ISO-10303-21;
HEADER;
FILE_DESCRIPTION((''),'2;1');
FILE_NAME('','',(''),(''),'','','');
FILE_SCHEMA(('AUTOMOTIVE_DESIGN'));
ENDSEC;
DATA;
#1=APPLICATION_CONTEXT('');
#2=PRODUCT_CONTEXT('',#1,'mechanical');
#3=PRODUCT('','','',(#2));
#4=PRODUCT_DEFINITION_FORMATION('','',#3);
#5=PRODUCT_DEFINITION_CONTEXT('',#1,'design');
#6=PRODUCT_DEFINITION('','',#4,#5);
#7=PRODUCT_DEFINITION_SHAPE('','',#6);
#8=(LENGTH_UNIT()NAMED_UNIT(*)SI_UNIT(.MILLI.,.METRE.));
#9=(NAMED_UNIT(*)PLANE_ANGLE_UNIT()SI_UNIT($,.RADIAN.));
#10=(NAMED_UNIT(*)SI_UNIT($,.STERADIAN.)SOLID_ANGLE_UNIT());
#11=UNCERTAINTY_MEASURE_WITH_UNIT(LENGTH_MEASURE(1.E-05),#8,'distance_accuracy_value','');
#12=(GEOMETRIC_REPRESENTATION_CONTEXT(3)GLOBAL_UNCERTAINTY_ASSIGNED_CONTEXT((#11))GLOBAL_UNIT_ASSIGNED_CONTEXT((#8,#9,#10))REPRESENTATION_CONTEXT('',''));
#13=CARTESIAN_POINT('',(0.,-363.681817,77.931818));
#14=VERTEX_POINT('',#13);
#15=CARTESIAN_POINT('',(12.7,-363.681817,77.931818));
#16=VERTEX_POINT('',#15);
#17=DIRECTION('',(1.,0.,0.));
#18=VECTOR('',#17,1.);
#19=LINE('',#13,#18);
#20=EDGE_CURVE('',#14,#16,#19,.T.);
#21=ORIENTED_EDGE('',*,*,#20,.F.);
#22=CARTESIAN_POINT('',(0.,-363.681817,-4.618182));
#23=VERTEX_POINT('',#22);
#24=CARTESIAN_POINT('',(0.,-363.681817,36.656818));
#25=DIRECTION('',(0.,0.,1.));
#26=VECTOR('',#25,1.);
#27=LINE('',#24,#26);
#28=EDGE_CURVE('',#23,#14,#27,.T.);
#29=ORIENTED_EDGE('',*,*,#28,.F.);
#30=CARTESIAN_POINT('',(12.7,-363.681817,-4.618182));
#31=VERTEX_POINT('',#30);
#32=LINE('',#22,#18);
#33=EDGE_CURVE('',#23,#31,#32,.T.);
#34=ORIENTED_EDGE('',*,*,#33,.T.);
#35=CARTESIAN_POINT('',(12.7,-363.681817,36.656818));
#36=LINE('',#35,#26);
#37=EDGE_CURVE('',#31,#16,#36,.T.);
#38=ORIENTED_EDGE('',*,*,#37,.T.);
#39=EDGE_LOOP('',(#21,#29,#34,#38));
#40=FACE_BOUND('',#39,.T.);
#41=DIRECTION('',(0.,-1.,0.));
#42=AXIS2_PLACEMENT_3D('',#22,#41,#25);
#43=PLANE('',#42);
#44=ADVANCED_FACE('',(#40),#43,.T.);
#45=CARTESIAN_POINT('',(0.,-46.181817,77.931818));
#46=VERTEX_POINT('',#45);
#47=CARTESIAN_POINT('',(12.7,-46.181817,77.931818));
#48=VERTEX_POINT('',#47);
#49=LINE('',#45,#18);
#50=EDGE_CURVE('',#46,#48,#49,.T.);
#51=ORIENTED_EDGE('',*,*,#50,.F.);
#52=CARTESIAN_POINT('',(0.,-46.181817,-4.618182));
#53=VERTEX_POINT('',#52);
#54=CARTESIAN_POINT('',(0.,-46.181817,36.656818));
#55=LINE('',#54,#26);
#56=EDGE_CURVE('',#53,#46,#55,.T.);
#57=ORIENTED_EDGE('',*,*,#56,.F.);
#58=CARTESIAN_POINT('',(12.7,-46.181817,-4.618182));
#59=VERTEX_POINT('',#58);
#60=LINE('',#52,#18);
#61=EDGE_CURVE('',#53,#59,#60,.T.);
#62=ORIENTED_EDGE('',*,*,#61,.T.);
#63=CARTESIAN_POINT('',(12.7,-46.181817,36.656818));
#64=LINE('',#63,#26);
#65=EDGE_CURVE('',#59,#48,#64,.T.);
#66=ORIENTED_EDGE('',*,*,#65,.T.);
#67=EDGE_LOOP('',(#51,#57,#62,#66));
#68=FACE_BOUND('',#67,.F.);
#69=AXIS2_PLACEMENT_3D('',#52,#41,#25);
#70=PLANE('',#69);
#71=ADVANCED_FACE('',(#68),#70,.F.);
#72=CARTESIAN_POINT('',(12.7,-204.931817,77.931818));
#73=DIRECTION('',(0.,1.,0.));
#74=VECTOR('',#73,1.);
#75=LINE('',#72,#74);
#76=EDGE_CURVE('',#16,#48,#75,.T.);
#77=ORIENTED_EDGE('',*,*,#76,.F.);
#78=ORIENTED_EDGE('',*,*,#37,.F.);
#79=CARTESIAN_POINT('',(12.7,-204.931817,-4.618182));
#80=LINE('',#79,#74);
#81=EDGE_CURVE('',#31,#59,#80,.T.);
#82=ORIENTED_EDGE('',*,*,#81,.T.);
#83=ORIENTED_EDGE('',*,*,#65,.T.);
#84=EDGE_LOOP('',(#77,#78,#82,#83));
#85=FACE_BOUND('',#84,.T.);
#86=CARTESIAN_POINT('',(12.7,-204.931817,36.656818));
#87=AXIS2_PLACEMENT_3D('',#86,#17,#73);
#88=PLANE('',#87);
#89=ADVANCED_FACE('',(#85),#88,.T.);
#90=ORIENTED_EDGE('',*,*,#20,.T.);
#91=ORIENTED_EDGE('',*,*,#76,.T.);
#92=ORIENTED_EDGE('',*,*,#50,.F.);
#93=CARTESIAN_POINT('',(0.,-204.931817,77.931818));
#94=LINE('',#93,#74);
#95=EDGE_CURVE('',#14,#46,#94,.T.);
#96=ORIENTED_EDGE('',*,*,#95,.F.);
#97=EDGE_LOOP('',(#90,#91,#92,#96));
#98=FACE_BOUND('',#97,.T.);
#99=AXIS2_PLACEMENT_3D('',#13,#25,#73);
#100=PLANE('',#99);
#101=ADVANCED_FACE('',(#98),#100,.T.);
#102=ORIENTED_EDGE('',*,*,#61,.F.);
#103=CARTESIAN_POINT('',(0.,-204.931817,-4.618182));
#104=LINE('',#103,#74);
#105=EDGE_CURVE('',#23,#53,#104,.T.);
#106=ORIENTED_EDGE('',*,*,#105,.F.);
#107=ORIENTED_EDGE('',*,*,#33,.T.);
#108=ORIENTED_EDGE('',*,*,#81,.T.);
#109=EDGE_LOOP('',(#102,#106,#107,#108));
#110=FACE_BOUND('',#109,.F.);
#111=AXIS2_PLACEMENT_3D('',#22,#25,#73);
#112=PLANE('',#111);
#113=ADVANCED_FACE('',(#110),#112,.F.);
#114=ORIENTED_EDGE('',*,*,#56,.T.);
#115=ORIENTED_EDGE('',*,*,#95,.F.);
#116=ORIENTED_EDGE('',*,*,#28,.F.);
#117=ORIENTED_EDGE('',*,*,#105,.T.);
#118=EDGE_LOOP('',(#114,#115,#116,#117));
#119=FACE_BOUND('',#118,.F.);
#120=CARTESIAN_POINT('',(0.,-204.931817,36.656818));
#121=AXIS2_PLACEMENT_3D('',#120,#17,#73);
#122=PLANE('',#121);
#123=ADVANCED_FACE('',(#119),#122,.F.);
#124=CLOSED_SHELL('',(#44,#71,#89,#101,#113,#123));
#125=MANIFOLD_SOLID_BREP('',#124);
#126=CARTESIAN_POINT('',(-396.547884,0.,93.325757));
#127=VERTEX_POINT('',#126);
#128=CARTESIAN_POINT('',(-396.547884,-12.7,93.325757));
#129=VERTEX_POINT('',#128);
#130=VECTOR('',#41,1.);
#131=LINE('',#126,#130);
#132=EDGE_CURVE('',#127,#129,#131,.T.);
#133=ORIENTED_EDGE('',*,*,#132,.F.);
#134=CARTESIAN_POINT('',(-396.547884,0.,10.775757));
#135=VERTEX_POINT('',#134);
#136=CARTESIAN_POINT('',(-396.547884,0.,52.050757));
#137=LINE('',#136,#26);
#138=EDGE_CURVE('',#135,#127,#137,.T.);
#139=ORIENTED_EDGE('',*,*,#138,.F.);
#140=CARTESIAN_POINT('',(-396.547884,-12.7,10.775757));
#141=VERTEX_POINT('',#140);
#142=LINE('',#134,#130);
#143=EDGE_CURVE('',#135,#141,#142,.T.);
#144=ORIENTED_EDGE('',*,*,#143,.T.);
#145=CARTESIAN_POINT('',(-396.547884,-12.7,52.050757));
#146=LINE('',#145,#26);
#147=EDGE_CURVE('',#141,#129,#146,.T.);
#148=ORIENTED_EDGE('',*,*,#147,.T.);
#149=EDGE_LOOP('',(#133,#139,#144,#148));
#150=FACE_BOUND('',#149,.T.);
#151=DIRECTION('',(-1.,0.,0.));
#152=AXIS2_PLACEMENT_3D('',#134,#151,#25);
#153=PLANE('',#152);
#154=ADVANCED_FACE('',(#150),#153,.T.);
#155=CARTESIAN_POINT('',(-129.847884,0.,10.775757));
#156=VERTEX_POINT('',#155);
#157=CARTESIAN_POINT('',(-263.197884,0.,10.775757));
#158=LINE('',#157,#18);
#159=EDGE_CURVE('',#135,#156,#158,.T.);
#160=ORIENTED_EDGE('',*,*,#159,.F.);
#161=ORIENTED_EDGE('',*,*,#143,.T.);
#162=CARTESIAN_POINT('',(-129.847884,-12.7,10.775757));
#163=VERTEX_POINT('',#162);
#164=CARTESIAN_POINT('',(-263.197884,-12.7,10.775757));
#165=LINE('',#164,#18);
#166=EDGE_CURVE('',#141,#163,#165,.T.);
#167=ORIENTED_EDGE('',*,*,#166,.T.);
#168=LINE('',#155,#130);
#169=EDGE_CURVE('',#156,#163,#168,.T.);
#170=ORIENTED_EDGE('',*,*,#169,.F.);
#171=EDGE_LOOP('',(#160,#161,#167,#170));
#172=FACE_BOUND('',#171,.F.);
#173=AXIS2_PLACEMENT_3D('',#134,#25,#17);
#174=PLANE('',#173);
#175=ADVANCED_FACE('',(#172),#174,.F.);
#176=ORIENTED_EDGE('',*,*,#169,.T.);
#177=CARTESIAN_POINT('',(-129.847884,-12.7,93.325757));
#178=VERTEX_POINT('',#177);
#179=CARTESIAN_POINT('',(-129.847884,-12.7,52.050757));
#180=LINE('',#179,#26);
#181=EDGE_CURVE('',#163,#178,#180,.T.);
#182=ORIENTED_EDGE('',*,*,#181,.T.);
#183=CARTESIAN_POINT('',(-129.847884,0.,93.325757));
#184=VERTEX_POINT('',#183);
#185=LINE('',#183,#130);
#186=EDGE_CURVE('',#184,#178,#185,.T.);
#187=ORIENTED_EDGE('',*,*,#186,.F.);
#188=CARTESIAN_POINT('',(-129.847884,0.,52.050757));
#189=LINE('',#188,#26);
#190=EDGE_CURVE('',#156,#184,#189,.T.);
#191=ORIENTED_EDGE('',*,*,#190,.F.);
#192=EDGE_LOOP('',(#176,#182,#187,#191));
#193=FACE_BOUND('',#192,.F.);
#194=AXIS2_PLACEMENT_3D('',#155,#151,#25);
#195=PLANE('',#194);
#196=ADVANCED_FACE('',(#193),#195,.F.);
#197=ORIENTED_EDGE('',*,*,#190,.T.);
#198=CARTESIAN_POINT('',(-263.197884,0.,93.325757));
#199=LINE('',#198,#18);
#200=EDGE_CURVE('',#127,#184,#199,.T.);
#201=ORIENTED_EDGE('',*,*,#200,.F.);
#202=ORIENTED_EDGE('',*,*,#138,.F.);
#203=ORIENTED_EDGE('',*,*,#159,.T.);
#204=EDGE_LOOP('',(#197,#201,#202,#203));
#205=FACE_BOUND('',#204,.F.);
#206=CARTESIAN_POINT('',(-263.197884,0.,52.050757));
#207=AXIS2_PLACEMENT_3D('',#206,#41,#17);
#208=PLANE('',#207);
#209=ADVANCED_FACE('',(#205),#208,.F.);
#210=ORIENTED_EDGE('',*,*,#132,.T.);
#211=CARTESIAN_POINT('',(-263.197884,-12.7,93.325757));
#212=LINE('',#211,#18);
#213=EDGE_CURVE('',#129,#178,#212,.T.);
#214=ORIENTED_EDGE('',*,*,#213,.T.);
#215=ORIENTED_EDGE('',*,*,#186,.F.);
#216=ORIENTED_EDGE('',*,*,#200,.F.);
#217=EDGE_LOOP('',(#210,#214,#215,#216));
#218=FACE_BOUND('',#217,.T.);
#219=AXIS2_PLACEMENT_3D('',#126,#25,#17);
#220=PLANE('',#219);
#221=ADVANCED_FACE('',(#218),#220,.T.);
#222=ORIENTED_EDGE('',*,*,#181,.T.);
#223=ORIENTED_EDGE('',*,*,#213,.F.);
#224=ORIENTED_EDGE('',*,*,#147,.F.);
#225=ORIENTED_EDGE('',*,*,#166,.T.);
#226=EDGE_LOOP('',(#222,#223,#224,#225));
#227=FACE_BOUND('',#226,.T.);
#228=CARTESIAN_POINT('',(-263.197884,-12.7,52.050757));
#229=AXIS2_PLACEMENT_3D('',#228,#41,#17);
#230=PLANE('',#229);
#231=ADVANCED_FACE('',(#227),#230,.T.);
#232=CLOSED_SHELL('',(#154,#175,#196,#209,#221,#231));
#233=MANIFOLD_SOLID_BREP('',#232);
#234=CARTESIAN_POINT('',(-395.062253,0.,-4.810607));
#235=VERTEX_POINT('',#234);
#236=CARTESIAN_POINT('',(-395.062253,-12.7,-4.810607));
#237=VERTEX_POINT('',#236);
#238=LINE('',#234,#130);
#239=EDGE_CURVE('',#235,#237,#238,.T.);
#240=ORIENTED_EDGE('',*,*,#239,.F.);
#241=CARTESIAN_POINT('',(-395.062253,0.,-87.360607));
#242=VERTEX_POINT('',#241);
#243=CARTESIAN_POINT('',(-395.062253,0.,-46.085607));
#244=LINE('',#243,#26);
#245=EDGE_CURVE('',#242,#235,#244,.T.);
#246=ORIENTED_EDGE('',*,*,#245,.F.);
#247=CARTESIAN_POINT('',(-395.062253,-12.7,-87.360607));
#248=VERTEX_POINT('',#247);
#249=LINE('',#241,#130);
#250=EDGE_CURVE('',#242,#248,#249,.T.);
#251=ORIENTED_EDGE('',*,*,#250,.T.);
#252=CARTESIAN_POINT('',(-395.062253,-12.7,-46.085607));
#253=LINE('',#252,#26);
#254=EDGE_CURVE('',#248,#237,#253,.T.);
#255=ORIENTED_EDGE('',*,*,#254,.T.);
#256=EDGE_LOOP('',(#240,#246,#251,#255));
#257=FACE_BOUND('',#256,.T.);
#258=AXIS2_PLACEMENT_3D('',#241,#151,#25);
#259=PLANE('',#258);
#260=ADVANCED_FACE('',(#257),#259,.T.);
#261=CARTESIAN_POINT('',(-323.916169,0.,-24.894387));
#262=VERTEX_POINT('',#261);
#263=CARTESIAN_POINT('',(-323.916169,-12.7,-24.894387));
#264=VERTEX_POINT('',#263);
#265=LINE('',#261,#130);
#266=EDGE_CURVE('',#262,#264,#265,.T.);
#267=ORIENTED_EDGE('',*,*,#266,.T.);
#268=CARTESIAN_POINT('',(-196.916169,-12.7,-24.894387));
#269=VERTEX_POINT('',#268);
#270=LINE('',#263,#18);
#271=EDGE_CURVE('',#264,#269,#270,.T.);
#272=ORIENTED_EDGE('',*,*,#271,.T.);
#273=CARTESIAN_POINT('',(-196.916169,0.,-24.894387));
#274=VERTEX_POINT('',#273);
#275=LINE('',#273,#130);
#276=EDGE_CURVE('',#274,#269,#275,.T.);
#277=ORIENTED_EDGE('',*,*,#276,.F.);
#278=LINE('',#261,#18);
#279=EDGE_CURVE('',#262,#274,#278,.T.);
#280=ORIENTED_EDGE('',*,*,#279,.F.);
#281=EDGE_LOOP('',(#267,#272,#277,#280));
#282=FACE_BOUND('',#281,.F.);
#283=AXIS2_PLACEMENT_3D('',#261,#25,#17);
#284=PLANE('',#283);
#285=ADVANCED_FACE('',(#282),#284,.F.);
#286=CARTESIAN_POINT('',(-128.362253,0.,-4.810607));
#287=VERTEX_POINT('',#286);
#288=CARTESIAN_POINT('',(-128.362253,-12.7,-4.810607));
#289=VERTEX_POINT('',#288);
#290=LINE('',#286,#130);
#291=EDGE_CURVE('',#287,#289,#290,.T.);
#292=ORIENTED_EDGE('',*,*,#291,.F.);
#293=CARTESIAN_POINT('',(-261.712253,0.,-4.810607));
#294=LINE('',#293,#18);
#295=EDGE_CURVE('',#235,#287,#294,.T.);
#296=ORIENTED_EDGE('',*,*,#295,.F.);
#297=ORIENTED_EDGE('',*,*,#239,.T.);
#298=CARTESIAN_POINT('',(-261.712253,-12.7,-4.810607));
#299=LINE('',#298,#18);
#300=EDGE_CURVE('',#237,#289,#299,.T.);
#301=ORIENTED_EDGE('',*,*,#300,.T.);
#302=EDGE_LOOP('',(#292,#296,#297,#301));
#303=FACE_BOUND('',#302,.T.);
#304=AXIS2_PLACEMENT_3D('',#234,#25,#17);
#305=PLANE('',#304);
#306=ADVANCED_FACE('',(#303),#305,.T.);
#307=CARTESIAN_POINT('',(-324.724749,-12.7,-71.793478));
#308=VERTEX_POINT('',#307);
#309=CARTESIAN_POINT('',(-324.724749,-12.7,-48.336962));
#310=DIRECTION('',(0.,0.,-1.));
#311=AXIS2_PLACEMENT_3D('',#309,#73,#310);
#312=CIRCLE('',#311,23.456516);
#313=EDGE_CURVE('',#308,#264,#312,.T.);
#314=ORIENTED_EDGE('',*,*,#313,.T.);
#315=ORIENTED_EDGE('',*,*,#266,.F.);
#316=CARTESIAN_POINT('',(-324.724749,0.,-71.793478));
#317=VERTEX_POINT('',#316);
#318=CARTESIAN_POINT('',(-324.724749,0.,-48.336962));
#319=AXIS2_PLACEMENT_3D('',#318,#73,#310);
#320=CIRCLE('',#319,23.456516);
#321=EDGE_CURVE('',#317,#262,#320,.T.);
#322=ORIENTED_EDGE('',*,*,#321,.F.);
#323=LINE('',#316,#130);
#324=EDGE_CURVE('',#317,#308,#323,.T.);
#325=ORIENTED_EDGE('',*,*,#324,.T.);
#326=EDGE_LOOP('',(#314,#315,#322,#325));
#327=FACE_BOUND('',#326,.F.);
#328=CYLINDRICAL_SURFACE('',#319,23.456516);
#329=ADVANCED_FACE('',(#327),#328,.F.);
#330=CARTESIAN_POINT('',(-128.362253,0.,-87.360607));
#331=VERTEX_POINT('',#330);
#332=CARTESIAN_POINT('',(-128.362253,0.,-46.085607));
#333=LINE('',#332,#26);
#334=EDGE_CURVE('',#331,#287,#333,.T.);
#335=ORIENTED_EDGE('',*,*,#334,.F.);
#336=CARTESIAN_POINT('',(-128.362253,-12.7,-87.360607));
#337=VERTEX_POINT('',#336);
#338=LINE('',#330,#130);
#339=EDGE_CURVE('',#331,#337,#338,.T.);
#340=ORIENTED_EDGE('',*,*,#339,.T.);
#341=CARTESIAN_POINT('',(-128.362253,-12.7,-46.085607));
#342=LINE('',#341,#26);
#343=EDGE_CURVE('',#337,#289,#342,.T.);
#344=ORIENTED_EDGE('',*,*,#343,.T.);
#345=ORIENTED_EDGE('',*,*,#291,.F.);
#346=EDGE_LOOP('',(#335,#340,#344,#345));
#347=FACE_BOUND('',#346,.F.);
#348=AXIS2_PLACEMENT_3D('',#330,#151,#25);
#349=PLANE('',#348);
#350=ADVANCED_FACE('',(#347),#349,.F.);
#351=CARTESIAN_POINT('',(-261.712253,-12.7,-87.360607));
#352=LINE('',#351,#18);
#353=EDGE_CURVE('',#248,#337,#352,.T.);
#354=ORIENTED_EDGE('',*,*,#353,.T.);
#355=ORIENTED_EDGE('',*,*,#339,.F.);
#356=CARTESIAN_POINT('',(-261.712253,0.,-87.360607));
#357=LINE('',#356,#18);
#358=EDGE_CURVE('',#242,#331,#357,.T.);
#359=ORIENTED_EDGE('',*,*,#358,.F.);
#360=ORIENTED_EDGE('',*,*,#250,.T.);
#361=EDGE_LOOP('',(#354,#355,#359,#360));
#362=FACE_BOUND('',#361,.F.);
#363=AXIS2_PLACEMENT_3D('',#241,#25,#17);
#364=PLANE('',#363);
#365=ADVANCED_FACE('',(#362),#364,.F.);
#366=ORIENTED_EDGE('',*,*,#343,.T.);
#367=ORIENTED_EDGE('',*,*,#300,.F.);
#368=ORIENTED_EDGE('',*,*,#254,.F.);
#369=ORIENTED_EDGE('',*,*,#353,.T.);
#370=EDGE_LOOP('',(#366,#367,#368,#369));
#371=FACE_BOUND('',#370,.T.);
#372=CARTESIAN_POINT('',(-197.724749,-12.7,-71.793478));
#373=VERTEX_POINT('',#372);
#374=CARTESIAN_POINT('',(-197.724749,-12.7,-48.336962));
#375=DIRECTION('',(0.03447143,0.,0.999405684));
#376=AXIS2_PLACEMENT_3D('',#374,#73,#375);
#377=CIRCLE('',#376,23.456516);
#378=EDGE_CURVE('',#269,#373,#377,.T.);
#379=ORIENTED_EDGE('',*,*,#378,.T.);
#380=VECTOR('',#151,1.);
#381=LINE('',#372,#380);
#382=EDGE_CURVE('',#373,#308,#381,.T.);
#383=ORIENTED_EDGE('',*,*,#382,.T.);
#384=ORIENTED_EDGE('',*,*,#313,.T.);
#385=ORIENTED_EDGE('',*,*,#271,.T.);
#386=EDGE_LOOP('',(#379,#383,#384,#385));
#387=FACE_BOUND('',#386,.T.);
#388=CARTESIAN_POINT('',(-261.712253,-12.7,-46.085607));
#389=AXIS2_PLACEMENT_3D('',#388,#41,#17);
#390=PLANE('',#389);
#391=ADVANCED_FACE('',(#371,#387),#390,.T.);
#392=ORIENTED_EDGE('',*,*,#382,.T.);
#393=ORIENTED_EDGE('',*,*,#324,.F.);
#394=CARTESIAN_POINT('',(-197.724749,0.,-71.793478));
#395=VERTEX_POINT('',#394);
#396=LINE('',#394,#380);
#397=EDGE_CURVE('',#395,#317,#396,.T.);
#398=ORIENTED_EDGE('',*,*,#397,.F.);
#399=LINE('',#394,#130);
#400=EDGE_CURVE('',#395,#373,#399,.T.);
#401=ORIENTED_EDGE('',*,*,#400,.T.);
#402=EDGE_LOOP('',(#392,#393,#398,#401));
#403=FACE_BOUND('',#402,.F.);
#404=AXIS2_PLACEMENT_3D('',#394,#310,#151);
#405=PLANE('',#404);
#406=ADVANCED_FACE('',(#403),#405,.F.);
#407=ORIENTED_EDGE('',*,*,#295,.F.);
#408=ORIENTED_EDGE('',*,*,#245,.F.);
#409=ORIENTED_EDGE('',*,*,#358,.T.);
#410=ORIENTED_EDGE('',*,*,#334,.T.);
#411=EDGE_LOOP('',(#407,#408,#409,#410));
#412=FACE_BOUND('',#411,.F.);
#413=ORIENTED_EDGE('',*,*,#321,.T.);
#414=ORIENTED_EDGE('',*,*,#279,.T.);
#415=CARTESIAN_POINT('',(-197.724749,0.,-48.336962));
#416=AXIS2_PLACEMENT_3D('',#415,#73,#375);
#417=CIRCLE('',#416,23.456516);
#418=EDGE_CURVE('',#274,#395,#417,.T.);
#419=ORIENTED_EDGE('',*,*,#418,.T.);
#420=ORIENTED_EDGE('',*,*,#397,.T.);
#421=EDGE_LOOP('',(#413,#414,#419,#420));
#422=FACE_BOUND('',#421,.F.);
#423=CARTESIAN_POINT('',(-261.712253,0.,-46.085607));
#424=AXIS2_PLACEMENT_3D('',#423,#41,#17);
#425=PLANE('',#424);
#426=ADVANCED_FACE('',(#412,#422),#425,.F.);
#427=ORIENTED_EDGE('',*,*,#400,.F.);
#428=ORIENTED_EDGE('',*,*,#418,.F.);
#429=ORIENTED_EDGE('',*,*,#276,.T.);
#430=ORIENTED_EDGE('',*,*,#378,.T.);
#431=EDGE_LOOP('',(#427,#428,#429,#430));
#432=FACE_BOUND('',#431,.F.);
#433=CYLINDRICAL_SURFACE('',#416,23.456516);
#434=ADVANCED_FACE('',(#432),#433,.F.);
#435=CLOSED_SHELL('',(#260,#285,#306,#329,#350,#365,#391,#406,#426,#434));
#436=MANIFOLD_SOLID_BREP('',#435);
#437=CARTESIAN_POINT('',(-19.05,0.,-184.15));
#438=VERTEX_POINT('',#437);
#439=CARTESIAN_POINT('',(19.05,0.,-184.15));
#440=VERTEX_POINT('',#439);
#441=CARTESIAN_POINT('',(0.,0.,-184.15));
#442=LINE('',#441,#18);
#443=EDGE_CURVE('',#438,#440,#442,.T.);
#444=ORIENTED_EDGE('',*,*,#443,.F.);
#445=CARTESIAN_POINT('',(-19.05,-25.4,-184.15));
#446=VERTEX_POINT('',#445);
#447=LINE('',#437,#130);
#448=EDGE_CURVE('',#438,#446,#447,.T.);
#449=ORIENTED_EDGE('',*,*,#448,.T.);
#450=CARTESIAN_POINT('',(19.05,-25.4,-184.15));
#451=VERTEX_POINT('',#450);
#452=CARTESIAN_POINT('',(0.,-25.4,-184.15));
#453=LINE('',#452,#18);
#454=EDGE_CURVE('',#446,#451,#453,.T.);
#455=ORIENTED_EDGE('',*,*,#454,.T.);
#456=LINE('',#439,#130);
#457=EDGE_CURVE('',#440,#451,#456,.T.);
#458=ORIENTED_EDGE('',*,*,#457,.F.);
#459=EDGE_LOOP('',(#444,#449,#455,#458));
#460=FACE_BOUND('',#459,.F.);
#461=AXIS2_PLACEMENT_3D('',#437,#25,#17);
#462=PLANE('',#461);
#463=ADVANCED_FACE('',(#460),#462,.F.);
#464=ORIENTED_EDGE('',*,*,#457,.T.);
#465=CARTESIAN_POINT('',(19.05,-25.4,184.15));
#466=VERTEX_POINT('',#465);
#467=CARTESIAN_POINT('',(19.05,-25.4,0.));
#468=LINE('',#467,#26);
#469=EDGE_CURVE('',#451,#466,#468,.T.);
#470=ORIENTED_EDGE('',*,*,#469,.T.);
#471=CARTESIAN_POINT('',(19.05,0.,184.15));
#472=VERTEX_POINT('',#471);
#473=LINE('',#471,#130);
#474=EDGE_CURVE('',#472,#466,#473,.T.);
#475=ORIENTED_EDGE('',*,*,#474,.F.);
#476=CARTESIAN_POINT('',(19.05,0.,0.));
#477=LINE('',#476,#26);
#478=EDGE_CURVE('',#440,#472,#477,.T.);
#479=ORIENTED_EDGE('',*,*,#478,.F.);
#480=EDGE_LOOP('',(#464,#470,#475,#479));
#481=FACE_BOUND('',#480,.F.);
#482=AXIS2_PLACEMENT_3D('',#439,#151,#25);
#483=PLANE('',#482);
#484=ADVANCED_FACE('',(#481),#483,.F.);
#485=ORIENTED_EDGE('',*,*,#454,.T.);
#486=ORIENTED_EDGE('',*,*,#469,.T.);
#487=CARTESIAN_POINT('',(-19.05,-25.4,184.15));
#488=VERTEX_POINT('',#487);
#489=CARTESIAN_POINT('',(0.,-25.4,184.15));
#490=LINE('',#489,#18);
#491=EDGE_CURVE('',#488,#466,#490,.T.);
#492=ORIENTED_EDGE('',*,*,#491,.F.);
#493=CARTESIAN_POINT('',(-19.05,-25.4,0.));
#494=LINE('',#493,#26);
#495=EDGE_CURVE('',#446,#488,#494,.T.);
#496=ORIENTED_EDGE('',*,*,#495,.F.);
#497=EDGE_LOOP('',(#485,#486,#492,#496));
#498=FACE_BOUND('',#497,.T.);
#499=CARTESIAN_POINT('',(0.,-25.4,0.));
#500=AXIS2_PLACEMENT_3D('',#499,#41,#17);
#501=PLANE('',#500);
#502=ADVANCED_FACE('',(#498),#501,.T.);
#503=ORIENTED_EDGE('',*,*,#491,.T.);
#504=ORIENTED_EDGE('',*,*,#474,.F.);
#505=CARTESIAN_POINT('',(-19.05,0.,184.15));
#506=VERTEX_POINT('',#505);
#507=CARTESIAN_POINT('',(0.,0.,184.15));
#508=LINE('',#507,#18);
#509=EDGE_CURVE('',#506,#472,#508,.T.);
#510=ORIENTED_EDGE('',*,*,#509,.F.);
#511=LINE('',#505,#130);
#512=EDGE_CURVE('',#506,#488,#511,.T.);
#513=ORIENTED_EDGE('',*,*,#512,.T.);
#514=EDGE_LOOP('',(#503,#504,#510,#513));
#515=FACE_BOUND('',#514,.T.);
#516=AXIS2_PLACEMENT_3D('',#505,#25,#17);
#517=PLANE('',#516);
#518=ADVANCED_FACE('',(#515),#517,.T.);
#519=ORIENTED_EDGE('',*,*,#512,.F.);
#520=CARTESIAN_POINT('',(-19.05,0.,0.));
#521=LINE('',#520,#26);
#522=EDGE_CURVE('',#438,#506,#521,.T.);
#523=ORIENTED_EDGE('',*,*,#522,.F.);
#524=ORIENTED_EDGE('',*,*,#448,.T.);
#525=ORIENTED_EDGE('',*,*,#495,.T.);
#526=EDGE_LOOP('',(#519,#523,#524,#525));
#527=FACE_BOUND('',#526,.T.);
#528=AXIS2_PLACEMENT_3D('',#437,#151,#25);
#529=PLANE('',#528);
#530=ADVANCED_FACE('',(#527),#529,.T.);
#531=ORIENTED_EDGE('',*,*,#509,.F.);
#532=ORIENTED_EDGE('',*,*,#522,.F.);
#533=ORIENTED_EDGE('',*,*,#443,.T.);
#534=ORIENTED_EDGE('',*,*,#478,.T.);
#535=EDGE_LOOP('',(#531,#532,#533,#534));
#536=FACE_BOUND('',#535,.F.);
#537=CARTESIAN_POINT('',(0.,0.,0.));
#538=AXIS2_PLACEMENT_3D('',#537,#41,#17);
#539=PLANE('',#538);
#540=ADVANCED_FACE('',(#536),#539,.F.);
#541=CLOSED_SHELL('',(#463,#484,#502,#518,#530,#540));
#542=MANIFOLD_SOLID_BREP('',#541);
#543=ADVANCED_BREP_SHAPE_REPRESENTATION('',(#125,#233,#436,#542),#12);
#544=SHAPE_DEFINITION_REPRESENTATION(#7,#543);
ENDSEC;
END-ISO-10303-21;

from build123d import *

# Parameters (mm, degrees)
F0_W     = 38.1
F0_H     = 368.3
F1_DEPTH = 25.4
F2_W     = 266.7
F2_H     = 82.55
F3_DEPTH = 12.7
F4_W     = 266.7
F4_H     = 82.55
F5_DEPTH = 12.7
F6_W     = 317.5
F6_H     = 82.55
F7_DEPTH = 12.7


with BuildPart() as f1:
    # F0 (on Front) → F1 (new body)
    with BuildSketch(Plane.XZ):
        Rectangle(F0_W, F0_H)
    extrude(amount=F1_DEPTH)


with BuildPart() as f3:
    # F2 (on Front) → F3 (new body)
    with BuildSketch(Plane.XZ):
        with Locations((-263.197883749, 52.0507570222)):
            Rectangle(F2_W, F2_H)
    extrude(amount=F3_DEPTH)


with BuildPart() as f5:
    # F4 (on Front) → F5 (new body)
    with BuildSketch(Plane.XZ):
        with Locations((-261.7122530937, -46.0856069893)):
            Rectangle(F4_W, F4_H)
        with BuildLine():
            ThreePointArc((-324.7247487307, -71.793478018), (-348.1777791041, -47.9326123349), (-323.9161690893, -24.8943870487))
            Line((-323.9161690893, -24.8943870487), (-196.9161690893, -24.8943870487))
            ThreePointArc((-196.9161690893, -24.8943870487), (-174.2717183572, -48.741312141), (-197.7247487307, -71.793478018))
            Line((-197.7247487307, -71.793478018), (-324.7247487307, -71.793478018))
        make_face(mode=Mode.SUBTRACT)
    extrude(amount=F5_DEPTH)


with BuildPart() as f7:
    # F6 (on Right) → F7 (new body)
    with BuildSketch(Plane.YZ):
        with Locations((-204.9318166077, 36.656818153)):
            Rectangle(F6_W, F6_H)
    extrude(amount=F7_DEPTH)


solid = Compound([f1.part, f3.part, f5.part, f7.part])
